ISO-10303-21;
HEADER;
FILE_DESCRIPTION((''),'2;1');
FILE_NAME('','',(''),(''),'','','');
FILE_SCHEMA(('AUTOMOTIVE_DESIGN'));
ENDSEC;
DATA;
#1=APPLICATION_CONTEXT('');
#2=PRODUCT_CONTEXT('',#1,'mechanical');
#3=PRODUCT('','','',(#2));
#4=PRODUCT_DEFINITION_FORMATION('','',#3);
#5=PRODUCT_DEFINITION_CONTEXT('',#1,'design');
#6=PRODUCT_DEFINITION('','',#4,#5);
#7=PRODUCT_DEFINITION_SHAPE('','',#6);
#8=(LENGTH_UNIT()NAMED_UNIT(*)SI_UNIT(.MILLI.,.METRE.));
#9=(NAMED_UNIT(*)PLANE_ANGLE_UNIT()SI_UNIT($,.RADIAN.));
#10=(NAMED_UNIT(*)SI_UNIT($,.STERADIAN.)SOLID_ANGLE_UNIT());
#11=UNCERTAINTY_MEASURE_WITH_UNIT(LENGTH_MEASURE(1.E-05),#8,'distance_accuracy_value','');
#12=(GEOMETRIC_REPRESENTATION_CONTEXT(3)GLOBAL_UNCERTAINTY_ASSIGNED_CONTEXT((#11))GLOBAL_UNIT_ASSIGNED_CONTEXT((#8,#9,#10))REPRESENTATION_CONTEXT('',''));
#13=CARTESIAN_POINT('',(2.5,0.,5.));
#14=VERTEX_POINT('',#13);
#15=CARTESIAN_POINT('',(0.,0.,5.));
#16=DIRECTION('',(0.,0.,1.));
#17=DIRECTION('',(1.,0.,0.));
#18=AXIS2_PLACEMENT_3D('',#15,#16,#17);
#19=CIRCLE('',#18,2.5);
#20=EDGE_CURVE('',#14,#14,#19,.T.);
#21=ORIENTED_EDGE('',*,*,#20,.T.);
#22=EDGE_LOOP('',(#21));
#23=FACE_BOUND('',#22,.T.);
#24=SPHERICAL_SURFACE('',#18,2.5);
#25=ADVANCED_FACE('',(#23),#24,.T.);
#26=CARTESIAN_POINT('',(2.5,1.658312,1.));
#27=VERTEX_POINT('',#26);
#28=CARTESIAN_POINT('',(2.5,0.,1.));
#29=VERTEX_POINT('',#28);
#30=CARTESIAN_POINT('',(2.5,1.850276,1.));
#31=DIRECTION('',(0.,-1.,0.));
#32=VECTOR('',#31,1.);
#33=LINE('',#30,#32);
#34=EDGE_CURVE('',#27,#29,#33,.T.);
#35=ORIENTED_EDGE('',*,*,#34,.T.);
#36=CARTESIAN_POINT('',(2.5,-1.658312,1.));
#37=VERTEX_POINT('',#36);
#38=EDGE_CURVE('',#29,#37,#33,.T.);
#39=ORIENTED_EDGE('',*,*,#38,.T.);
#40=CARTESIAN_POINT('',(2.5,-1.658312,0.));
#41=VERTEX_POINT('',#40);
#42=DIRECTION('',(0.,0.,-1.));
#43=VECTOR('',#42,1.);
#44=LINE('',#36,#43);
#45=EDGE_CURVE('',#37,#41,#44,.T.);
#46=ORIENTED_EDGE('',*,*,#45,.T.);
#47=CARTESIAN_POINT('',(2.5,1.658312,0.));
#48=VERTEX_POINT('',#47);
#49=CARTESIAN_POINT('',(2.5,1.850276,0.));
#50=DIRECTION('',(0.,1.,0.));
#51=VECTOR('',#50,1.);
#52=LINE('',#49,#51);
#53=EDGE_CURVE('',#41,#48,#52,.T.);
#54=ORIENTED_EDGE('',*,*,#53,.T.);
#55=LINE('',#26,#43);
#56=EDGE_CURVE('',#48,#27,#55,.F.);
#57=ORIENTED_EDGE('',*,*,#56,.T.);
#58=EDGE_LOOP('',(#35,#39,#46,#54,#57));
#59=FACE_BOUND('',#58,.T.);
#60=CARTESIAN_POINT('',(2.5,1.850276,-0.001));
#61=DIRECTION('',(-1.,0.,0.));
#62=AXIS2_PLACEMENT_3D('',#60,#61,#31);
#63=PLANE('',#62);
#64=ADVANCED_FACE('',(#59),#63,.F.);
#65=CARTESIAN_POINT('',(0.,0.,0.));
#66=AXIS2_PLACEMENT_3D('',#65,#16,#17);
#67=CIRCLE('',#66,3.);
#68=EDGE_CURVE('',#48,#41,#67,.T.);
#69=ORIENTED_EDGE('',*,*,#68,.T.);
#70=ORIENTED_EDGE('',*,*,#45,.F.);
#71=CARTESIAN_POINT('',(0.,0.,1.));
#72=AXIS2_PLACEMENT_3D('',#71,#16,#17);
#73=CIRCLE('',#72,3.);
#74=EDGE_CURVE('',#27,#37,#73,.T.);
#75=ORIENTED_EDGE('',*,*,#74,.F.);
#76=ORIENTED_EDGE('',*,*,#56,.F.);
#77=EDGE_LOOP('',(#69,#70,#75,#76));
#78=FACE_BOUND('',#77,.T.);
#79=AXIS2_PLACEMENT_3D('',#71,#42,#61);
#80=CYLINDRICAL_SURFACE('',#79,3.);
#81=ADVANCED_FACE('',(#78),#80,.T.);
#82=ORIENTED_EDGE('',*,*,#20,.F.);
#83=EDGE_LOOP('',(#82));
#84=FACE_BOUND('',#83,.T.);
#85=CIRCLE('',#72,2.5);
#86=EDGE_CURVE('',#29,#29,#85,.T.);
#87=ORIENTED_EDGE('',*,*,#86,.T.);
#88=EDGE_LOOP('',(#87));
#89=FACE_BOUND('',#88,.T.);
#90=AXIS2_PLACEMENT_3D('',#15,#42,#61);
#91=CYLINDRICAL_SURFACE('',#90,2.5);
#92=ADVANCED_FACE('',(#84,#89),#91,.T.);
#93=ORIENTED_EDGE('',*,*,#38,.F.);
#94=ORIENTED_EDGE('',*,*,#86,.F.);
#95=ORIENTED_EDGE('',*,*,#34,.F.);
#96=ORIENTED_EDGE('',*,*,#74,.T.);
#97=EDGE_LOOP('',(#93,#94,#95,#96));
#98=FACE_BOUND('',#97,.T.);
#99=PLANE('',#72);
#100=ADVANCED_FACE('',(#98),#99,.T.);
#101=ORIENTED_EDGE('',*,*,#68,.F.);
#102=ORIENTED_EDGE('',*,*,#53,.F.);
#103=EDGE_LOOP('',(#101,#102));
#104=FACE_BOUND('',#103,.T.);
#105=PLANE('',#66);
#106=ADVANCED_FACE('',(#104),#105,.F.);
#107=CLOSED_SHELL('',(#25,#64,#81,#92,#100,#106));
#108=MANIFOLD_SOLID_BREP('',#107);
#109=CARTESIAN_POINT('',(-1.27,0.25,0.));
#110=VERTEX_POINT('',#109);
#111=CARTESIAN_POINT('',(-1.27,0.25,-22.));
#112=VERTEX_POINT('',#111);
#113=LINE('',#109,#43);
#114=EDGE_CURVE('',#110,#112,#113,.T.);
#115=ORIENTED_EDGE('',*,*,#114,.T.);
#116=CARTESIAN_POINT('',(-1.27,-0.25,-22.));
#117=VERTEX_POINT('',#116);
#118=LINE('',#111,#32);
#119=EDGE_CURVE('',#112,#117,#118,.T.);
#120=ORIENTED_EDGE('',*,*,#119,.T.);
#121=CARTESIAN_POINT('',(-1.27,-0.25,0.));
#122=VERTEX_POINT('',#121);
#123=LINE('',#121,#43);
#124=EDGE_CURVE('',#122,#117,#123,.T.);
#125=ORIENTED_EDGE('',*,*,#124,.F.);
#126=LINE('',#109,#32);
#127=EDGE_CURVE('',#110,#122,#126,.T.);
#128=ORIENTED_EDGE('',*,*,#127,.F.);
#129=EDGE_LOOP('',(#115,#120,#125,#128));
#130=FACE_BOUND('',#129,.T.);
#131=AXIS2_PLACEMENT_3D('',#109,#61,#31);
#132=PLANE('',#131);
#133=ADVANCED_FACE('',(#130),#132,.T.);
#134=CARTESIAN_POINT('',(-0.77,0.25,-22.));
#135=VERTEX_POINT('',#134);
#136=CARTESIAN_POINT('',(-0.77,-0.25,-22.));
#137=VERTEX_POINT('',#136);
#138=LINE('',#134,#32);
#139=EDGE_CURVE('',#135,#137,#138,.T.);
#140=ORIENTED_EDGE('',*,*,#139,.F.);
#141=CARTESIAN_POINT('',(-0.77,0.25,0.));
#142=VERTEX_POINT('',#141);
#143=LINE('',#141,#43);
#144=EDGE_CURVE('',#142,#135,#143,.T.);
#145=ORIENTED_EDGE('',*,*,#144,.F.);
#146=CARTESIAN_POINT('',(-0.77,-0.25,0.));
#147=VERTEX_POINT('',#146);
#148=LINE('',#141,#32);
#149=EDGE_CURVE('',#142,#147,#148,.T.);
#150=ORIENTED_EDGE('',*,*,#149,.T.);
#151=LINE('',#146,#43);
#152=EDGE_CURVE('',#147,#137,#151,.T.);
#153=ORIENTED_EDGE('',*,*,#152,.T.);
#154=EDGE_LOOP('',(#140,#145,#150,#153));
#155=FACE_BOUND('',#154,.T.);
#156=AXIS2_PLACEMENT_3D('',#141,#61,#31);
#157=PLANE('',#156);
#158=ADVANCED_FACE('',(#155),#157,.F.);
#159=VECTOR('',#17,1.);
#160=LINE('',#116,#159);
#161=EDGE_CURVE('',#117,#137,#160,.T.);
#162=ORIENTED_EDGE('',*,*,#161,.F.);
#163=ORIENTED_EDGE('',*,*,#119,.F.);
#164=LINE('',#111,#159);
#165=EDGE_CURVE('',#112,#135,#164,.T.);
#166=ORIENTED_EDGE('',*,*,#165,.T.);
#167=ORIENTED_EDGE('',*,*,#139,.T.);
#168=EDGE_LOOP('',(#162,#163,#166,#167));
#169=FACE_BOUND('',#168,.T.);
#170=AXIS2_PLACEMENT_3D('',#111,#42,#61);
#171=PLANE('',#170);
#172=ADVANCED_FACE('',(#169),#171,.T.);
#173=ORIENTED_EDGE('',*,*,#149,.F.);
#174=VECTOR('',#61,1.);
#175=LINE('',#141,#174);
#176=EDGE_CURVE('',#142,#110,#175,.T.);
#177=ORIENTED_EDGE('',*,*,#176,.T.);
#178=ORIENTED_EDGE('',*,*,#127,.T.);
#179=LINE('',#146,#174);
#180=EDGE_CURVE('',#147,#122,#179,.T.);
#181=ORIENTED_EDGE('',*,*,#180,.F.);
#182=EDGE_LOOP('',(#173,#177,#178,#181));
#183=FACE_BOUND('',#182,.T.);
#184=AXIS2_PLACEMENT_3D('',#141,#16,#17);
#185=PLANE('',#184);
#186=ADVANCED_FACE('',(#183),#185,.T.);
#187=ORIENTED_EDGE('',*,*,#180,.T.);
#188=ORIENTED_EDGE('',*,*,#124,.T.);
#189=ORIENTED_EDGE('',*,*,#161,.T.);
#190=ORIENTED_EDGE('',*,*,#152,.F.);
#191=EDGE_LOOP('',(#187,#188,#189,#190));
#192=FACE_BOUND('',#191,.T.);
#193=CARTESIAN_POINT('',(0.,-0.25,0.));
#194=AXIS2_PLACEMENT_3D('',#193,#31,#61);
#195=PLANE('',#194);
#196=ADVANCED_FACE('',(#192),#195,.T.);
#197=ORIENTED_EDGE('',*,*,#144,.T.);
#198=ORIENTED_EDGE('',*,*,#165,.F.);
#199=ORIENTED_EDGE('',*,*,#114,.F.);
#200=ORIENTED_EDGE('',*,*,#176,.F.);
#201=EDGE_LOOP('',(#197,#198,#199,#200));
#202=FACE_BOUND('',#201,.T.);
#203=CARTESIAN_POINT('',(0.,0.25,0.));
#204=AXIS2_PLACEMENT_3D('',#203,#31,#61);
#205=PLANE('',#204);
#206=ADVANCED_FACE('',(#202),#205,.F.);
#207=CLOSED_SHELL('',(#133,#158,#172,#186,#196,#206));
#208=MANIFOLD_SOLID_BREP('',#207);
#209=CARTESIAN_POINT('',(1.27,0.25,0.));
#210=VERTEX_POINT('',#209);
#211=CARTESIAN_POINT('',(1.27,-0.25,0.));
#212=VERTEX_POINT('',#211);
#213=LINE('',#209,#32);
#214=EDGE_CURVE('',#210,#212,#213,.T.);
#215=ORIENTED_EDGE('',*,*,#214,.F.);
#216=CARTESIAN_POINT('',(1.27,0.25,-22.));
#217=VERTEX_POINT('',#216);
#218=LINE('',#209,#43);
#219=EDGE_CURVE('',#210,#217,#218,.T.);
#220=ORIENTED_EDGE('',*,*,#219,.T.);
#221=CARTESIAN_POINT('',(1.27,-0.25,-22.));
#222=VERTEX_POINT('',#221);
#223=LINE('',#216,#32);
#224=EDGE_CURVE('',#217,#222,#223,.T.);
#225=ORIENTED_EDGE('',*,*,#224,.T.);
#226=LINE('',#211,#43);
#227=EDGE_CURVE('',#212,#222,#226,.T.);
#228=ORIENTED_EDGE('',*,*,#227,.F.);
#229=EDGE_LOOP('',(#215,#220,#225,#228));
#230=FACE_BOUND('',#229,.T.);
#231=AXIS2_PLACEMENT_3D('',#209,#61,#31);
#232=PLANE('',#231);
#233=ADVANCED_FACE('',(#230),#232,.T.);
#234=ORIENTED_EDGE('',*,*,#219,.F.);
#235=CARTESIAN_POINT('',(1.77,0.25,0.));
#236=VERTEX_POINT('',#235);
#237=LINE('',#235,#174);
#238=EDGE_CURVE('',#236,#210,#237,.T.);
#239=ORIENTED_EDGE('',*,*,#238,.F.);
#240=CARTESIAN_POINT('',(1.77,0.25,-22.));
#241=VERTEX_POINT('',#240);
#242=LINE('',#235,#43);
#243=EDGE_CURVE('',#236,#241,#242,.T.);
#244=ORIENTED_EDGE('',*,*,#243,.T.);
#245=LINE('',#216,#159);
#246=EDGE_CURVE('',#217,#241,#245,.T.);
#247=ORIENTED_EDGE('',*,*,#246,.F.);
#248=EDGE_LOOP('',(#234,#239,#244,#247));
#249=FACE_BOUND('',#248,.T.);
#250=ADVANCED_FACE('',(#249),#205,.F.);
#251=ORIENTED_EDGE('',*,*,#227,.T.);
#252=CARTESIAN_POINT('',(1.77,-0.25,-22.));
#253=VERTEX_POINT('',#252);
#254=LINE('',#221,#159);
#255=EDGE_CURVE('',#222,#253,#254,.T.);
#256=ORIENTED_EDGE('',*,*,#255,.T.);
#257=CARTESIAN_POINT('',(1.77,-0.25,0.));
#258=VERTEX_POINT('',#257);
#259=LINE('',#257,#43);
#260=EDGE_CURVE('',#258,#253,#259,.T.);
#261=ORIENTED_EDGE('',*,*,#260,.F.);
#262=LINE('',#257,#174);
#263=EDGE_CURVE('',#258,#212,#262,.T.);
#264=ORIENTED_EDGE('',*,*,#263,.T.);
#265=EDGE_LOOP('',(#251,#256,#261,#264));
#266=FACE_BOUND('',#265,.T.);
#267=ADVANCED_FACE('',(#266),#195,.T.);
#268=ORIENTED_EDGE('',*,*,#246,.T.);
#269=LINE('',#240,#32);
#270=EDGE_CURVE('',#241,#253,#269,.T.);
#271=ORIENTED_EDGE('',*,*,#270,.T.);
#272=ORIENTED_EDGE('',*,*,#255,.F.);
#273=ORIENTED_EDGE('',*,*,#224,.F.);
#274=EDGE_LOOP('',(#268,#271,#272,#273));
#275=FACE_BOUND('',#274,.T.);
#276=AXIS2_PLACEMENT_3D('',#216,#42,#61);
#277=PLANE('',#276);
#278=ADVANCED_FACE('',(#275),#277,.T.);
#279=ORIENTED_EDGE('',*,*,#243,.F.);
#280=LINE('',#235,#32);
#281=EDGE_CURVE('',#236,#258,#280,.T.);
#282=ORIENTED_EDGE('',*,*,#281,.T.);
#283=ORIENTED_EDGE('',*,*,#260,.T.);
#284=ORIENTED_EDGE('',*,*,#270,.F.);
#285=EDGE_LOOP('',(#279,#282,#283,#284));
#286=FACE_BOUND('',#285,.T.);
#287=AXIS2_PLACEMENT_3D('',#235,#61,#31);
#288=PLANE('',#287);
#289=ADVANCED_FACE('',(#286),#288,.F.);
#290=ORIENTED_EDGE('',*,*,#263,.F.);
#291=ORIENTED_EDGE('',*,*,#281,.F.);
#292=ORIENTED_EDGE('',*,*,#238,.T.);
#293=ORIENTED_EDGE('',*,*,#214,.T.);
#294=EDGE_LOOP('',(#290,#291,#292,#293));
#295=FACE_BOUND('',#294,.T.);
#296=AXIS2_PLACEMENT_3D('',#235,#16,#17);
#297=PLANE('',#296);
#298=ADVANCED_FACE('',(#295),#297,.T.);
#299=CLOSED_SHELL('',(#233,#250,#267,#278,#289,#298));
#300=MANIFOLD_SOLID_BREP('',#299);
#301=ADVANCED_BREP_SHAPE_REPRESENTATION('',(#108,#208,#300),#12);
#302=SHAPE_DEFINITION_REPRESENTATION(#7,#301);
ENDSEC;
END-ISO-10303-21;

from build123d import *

# Parameters (mm, degrees)
SKETCH1_R           = 3
BOSS_EXTRUDE1_DEPTH = 1
SKETCH2_R           = 2.5
BOSS_EXTRUDE2_DEPTH = 4
DOME1_FACE_RADIUS   = 2.5
DOME1_HEIGHT        = 2.5
CUT_EXTRUDE1_REACH  = 9.762
SKETCH3_W           = 0.5
SKETCH3_H           = 4.031292186
SKETCH8_W           = 0.5
SKETCH8_H           = 22
BASE_FLANGE1_DEPTH  = 0.25
SKETCH9_W           = 0.5
SKETCH9_H           = 22
BASE_FLANGE2_DEPTH  = 0.25


# Sheet-metal steps are written as plain solids
with BuildPart() as part:
    # Sketch1 → Boss-Extrude1 (new body)
    with BuildSketch(Plane.XY):
        Circle(SKETCH1_R)
    extrude(amount=BOSS_EXTRUDE1_DEPTH)

    # Sketch2 → Boss-Extrude2 (add)
    with BuildSketch(Plane.XY.offset(1)):
        Circle(SKETCH2_R)
    extrude(amount=BOSS_EXTRUDE2_DEPTH)

    # Dome1: a dome of height H over a round flat face of radius A is a cap of a sphere of radius (A * A + H * H) / (2 * H)
    dome1_r = (DOME1_FACE_RADIUS * DOME1_FACE_RADIUS + DOME1_HEIGHT * DOME1_HEIGHT) / (2 * DOME1_HEIGHT)
    dome1_base = Plane((0, 0, 5), z_dir=(0, 0, 1))
    with Locations(dome1_base.offset(DOME1_HEIGHT - dome1_r)):
        dome1_ball = Sphere(dome1_r, mode=Mode.PRIVATE)
    add(split(dome1_ball, bisect_by=dome1_base, keep=Keep.TOP, mode=Mode.PRIVATE))

    # Sketch3 → Cut-Extrude1 (cut, up to next)
    with BuildSketch(Plane.XY.offset(1), mode=Mode.PRIVATE) as cut_extrude1_sk1:
        with Locations((2.75, -0.165370345)):
            Rectangle(SKETCH3_W, SKETCH3_H)
    cut_extrude1_tool1 = extrude(cut_extrude1_sk1.sketch, amount=-CUT_EXTRUDE1_REACH, mode=Mode.PRIVATE) & part.part
    add(cut_extrude1_tool1.solids().sort_by_distance((2.75, -0.16537, 1))[0], mode=Mode.SUBTRACT)


with BuildPart() as body_2:
    # Sketch8 → Base-Flange1 (new, symmetric)
    with BuildSketch(Plane(origin=(0, 0, 0), x_dir=(1, 0, 0), z_dir=(0, 1, 0))):
        with Locations((-1.02, 11)):
            Rectangle(SKETCH8_W, SKETCH8_H)
    extrude(amount=BASE_FLANGE1_DEPTH, both=True)


with BuildPart() as body_3:
    # Sketch9 → Base-Flange2 (new, symmetric)
    with BuildSketch(Plane(origin=(0, 0, 0), x_dir=(1, 0, 0), z_dir=(0, 1, 0))):
        with Locations((1.52, 11)):
            Rectangle(SKETCH9_W, SKETCH9_H)
    extrude(amount=BASE_FLANGE2_DEPTH, both=True)


solid = Compound([part.part, body_2.part, body_3.part])
